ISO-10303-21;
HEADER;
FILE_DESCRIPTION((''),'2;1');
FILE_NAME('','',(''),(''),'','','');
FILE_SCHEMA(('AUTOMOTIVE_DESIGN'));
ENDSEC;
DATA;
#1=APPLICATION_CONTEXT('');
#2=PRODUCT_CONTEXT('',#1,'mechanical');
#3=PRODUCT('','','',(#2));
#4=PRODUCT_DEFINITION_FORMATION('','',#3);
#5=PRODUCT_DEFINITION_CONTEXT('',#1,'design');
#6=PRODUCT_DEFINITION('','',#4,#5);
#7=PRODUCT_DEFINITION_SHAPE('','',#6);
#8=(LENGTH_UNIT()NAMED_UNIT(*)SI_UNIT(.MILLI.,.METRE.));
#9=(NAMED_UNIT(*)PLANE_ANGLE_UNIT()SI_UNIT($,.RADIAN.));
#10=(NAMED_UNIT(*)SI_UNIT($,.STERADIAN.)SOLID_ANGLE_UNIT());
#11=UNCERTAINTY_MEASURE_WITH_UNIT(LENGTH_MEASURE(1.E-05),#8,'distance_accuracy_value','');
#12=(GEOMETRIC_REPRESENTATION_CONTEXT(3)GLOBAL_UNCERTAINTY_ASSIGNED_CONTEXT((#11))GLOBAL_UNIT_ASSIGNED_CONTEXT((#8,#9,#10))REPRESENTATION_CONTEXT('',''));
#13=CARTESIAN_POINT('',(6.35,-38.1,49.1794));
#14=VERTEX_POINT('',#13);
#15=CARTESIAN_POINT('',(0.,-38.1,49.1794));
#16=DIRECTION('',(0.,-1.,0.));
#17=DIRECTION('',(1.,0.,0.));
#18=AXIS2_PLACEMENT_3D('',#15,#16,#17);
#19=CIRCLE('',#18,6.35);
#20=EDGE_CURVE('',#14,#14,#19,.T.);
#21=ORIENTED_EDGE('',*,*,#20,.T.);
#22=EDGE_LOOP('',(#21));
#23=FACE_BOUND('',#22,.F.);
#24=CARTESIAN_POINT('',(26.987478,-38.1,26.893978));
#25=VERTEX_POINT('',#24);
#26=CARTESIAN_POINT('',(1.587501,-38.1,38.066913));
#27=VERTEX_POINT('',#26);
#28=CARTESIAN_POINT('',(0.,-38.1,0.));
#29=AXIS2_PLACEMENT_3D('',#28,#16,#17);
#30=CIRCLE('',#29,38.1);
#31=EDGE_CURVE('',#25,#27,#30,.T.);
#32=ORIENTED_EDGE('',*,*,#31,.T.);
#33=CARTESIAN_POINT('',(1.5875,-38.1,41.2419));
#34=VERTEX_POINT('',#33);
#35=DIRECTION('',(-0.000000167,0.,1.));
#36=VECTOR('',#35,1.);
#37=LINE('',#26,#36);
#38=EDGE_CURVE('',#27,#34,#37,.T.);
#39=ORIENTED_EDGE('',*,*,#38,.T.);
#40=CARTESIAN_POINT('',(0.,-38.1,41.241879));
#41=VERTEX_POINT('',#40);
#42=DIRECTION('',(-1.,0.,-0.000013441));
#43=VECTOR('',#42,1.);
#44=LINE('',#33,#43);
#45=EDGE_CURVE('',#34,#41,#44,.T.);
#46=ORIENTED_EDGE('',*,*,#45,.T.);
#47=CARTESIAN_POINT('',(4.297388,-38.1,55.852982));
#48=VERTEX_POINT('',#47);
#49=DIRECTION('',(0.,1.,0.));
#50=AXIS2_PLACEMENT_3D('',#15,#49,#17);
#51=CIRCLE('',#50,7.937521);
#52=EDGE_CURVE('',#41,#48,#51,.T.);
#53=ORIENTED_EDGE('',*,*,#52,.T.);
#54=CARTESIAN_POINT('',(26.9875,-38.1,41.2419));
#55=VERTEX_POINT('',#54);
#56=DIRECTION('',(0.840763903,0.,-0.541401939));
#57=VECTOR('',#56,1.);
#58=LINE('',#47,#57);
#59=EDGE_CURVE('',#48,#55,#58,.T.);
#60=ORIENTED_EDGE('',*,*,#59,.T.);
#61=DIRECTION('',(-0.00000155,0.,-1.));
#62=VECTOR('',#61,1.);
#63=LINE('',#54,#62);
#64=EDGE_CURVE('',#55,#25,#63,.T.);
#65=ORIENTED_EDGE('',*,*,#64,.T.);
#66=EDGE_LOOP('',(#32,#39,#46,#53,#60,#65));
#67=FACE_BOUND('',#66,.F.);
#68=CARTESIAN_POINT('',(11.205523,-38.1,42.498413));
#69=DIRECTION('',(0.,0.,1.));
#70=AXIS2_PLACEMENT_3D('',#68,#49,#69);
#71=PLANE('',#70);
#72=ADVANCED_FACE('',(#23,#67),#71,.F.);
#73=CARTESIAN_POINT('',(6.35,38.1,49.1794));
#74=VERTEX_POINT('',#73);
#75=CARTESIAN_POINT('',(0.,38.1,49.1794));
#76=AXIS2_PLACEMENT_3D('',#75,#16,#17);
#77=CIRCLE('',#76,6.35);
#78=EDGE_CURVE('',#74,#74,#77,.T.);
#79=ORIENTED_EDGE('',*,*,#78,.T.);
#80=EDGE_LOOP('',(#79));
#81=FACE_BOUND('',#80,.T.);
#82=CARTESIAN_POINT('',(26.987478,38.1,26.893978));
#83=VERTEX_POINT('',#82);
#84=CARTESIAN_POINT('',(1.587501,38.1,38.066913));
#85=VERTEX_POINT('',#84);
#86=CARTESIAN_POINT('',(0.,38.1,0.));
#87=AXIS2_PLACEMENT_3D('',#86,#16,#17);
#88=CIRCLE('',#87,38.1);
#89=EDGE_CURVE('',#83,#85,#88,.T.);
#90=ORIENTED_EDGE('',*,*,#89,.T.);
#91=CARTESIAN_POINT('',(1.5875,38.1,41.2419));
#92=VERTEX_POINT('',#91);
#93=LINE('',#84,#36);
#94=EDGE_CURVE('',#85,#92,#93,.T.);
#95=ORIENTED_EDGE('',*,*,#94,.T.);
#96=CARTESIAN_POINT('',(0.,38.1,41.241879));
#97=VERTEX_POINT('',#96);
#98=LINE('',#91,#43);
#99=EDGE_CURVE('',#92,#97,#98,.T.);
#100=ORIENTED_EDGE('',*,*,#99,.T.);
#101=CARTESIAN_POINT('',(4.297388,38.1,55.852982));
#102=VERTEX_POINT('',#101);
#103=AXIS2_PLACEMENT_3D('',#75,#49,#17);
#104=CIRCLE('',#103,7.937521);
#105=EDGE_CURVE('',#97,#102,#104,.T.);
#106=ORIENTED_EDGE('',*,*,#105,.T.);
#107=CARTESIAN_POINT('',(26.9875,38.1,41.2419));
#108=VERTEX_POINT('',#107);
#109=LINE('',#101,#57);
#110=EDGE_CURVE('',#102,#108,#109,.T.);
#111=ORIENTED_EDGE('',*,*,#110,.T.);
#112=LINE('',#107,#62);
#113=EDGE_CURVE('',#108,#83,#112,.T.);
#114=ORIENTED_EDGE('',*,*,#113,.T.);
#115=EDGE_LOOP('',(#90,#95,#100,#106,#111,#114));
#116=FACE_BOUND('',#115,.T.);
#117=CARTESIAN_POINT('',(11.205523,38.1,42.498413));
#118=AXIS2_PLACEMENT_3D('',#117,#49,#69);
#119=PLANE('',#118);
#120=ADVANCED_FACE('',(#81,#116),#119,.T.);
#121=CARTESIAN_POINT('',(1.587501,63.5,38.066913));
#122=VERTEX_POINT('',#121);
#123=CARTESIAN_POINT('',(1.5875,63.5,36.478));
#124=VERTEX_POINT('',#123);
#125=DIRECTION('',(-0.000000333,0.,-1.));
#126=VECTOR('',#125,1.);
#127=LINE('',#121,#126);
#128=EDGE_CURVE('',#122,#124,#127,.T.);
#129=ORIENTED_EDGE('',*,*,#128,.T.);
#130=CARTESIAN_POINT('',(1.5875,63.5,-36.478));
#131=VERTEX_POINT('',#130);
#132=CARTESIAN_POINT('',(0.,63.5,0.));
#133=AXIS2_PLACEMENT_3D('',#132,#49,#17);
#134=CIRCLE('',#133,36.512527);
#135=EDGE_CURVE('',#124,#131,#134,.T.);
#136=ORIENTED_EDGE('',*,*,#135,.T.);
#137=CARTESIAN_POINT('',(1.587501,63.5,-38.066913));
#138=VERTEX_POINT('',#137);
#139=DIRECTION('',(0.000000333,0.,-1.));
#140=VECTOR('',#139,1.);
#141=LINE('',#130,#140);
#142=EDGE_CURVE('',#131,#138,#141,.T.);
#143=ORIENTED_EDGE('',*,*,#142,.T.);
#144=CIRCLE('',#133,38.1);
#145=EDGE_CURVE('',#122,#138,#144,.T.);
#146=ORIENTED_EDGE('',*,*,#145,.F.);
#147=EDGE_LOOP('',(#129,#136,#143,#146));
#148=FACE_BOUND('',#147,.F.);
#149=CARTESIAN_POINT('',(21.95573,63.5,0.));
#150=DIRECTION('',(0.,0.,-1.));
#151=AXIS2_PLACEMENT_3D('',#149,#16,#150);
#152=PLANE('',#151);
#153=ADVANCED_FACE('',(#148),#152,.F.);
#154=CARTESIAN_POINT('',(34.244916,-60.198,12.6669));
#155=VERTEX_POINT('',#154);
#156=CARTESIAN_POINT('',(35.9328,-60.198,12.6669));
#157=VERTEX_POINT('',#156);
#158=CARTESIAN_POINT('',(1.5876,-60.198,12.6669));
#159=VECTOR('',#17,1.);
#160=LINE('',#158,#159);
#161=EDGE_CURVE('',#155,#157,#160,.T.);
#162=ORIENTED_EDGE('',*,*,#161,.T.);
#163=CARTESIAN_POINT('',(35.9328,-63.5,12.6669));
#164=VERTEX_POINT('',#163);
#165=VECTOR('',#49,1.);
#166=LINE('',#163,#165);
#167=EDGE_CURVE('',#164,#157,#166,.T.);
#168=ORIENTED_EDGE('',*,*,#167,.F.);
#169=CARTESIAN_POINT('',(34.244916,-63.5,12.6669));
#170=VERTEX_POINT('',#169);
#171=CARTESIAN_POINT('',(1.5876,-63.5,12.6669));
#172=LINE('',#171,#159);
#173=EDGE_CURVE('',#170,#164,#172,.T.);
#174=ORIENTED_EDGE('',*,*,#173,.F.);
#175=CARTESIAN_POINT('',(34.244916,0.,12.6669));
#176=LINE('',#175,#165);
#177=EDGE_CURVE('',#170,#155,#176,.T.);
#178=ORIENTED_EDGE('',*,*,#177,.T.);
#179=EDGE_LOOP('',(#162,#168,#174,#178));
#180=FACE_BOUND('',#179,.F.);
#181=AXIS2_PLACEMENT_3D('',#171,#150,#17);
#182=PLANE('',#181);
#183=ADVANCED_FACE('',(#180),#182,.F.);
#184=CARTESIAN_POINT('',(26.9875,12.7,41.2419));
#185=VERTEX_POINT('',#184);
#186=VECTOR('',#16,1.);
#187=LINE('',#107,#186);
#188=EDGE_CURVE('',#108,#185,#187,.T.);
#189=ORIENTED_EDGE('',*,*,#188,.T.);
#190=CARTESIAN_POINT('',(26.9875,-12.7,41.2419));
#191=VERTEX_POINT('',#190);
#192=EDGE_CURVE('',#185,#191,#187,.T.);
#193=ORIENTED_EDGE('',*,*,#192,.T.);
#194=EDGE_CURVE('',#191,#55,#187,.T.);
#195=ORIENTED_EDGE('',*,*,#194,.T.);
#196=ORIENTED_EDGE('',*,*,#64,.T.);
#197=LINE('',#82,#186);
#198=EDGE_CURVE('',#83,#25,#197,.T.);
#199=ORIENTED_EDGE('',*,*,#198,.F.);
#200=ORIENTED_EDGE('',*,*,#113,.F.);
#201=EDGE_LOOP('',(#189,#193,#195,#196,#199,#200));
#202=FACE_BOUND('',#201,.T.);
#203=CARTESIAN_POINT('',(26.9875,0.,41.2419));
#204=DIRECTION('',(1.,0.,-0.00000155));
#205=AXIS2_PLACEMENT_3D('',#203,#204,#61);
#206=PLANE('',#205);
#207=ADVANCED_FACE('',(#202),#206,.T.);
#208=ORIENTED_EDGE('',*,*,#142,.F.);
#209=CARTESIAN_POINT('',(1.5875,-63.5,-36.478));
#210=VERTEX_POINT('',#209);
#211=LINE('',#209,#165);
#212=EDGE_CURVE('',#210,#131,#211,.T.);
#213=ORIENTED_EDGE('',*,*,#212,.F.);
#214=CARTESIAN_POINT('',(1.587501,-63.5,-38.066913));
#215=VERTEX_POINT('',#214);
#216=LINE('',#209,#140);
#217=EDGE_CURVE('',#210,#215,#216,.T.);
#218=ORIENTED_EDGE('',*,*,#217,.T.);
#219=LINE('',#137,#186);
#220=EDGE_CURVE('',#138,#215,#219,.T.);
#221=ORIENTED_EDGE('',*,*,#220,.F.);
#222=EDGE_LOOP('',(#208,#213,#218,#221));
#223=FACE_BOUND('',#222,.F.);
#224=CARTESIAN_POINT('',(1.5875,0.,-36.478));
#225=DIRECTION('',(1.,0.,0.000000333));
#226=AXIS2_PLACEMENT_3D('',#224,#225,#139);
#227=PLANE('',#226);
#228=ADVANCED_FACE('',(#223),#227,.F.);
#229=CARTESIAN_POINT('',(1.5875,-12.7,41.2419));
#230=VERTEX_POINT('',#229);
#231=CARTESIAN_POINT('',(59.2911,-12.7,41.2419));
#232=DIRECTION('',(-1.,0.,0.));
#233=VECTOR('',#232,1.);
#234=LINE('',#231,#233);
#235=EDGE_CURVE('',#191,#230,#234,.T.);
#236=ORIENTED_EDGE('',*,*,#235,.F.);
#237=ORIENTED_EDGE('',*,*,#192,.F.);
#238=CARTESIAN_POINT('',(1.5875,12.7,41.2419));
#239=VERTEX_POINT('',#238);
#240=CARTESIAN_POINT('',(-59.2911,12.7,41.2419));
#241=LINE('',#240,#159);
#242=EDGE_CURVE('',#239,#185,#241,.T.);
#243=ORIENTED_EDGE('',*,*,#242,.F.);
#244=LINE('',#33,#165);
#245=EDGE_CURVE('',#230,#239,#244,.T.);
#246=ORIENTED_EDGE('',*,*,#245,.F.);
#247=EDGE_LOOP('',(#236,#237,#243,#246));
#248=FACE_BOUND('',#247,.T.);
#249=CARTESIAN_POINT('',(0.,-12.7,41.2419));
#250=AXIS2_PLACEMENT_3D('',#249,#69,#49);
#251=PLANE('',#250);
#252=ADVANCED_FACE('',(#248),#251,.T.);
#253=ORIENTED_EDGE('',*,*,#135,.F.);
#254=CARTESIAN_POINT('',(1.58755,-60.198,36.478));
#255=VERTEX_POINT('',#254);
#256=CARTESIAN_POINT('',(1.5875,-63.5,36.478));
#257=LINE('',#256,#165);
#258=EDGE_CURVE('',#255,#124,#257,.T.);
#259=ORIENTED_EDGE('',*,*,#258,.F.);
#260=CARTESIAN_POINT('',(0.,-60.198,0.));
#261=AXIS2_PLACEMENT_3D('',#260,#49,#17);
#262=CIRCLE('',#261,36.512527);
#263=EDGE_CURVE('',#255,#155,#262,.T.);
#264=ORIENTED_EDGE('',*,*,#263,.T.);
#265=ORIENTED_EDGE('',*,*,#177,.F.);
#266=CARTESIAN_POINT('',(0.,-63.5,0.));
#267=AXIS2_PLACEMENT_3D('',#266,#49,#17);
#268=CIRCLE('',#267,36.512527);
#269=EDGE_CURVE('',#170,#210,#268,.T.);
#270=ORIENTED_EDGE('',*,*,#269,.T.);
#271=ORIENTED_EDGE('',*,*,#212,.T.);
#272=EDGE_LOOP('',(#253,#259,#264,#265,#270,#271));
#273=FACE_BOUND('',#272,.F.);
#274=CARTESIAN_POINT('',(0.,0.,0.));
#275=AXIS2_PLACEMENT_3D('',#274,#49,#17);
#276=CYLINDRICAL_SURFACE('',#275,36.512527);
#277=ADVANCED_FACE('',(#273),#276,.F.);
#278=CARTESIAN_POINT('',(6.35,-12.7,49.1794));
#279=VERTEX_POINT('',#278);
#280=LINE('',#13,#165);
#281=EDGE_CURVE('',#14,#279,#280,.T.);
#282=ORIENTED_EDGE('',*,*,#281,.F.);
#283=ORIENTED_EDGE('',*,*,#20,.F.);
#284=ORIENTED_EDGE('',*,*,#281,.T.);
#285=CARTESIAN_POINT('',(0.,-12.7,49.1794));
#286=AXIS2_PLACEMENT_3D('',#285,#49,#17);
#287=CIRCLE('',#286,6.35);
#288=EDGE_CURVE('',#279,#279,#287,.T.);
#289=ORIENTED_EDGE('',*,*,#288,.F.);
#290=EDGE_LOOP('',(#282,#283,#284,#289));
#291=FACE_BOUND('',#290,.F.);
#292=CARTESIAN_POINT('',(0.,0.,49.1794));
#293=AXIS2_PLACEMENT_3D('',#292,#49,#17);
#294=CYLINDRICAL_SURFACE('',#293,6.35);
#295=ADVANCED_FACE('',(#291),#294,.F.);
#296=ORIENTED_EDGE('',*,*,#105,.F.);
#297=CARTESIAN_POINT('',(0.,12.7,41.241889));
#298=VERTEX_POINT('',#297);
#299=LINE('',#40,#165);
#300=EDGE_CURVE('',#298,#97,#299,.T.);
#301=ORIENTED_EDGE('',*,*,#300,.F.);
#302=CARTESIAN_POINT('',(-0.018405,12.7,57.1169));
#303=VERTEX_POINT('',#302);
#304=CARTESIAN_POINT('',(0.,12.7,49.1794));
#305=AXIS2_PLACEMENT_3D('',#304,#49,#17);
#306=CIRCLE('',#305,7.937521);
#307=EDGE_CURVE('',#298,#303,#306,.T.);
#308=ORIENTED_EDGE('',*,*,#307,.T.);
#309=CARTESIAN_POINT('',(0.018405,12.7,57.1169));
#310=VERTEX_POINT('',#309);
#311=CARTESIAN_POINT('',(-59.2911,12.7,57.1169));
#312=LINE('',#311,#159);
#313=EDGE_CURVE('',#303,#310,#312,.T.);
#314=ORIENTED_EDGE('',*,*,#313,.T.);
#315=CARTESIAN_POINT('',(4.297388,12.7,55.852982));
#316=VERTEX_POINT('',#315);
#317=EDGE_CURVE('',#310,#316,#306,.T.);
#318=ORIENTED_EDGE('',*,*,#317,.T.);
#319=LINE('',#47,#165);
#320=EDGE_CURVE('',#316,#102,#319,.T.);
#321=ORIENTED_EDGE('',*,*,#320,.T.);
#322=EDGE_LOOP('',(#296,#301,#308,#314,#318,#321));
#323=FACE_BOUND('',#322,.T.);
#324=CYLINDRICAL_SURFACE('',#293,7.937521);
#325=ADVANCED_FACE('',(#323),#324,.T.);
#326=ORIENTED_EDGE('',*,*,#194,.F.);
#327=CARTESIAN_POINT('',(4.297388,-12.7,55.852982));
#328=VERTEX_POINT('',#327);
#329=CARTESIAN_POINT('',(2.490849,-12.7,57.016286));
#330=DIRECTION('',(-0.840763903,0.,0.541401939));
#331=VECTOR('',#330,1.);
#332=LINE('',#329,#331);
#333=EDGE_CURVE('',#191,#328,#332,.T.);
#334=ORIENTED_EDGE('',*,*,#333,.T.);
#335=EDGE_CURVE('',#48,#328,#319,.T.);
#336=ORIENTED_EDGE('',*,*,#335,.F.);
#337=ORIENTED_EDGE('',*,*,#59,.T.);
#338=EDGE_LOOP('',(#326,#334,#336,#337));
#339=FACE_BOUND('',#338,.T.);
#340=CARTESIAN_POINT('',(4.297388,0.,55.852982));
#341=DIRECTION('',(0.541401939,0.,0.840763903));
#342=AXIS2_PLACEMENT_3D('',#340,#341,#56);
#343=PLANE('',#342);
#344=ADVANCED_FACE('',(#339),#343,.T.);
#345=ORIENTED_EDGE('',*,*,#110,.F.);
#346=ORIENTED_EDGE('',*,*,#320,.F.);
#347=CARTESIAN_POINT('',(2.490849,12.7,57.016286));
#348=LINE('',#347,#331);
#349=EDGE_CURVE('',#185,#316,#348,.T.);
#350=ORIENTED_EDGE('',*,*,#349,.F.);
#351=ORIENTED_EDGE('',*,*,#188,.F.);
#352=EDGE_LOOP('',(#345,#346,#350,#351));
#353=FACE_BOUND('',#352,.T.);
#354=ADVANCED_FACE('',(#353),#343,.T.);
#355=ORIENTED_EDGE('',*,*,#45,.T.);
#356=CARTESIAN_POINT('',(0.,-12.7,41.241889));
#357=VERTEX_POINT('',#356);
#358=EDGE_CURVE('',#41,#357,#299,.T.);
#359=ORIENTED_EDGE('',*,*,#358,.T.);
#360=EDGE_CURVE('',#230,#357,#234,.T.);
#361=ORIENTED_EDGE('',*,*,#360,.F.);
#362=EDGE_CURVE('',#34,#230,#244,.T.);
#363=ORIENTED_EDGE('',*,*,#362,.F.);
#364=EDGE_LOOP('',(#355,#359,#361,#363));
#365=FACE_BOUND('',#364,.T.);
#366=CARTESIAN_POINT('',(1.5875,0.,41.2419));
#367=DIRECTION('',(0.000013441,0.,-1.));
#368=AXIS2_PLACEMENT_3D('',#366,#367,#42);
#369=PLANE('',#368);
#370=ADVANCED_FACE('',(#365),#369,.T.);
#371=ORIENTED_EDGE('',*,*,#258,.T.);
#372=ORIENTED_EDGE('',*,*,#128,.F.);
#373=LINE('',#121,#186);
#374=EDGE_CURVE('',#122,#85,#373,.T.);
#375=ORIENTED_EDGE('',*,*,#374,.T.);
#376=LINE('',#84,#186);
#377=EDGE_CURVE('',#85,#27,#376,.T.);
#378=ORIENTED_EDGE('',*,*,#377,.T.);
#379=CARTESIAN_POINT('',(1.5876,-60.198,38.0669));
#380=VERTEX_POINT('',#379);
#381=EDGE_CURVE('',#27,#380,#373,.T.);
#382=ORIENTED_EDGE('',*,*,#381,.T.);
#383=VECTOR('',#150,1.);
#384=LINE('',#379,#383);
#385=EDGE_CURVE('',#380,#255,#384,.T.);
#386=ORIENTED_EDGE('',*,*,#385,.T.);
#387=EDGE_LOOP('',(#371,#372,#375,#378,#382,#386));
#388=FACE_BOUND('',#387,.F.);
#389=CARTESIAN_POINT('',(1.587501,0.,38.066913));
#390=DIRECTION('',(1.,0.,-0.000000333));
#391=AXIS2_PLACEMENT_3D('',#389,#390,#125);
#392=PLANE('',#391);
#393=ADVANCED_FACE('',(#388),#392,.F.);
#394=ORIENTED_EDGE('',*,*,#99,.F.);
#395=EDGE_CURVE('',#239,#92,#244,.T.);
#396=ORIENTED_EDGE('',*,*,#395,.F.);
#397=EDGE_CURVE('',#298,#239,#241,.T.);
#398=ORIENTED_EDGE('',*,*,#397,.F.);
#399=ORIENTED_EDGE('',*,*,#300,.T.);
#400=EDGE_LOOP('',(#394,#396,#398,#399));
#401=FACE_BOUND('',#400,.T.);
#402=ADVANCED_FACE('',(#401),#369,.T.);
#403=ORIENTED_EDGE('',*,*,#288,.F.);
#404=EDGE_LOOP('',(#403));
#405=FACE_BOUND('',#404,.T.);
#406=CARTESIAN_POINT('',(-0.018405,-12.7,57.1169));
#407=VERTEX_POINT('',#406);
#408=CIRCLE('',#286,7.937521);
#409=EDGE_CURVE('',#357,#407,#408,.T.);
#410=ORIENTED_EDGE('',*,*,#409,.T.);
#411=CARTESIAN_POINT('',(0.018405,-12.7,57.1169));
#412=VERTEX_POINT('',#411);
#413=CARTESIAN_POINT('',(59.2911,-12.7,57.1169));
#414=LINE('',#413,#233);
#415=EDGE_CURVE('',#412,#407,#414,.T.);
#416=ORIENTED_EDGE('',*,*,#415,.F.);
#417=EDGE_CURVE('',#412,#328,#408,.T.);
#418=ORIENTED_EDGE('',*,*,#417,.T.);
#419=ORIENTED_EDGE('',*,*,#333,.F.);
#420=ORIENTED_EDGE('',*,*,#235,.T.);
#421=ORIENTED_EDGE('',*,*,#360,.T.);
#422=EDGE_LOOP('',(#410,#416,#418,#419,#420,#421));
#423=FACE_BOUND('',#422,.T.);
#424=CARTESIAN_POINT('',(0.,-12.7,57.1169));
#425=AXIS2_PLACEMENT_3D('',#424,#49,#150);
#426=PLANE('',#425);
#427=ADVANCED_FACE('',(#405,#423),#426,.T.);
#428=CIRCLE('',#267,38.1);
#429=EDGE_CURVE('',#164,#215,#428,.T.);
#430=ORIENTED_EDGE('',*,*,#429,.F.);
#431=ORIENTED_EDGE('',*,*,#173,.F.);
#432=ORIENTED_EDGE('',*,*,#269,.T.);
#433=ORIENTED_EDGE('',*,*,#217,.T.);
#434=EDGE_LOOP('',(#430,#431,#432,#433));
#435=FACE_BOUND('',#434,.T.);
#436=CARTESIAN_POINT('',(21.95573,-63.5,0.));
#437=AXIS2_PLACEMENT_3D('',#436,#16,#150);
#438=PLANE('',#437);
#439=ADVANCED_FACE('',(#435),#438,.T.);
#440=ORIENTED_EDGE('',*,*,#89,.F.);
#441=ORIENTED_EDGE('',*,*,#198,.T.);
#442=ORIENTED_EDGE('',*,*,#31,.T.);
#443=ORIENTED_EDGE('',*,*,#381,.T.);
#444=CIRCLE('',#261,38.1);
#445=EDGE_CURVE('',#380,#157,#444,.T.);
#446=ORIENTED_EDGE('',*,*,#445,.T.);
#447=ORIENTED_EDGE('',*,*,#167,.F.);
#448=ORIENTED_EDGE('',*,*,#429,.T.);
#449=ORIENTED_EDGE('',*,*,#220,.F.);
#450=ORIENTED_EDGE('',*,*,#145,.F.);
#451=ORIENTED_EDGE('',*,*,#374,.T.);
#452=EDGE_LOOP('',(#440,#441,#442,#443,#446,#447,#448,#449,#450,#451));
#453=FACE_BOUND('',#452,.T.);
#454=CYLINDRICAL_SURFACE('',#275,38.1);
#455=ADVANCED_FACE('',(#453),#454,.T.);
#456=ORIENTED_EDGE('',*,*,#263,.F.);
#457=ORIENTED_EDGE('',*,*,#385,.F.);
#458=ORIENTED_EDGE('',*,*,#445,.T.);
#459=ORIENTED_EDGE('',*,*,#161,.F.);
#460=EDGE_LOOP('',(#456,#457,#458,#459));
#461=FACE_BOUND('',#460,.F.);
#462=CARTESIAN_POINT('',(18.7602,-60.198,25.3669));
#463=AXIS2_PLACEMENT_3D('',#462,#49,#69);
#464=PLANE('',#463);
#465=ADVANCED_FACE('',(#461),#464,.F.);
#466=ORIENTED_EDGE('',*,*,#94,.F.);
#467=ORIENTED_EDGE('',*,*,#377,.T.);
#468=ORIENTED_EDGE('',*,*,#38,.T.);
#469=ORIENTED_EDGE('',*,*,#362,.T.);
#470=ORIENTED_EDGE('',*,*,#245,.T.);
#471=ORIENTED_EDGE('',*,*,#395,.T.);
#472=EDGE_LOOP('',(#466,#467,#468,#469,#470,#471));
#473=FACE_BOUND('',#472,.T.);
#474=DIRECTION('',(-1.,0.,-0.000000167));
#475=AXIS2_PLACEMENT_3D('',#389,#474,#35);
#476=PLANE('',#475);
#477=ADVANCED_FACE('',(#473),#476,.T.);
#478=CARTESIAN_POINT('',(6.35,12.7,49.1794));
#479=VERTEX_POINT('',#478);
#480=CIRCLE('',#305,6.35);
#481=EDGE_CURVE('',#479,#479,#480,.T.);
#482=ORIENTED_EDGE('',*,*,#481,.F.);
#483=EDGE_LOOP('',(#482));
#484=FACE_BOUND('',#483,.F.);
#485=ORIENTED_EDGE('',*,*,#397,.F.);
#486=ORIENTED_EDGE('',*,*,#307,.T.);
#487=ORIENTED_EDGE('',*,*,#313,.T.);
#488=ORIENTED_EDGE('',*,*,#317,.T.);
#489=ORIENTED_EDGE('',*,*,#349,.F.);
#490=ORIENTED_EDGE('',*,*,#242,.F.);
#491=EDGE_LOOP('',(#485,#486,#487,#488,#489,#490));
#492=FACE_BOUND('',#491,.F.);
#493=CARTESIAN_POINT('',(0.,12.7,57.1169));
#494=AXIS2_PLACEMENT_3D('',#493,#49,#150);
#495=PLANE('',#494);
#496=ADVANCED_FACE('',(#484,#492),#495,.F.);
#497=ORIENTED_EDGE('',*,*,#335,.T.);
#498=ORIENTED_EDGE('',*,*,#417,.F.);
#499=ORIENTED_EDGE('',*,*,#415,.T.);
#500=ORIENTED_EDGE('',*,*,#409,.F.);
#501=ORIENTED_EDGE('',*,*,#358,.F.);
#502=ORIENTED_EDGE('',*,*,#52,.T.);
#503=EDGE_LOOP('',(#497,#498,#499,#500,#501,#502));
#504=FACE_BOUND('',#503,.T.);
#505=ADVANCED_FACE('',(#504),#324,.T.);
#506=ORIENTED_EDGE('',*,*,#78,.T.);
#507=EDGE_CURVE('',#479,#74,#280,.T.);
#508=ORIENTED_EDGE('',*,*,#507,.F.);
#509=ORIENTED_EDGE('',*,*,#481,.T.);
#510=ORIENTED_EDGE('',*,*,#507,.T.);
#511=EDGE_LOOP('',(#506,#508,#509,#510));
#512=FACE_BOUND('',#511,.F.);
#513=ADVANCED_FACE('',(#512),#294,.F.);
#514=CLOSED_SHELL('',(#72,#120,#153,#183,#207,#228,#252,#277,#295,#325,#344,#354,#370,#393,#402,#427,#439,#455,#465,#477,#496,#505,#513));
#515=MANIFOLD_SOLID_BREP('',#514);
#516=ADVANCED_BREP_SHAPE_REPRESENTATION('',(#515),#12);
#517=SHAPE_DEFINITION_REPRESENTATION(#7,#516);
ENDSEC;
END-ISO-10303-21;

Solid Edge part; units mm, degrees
sketch "Sketch1" plane through (0, 0, 0) normal (0, -1, 0) x (1, 0, 0)
  line L0 (1.5875, -36.478) -> (1.5875, -38.0669)
  arc A0 (1.5875, 38.0669) -> (1.5875, -38.0669) centre (0, 0) cw
  line L1 (1.5875, 38.0669) -> (1.5875, 36.478)
  arc A1 (1.5875, 36.478) -> (1.5875, -36.478) centre (0, 0) cw
  dimension "D1" = 76.2
extrude "Protrusion1" add sketch "Sketch1" along normal mid plane 127
sketch "Sketch2" plane through (0, 0, 0) normal (0, -1, 0) x (1, 0, 0)
  circle A0 centre (0, 49.1794) radius 6.35
  line L0 (1.5875, 38.0669) -> (1.5875, 41.2419)
  line L1 (1.5875, 41.2419) -> (0, 41.2419)
  line L2 (4.2974, 55.853) -> (26.9875, 41.2419)
  line L3 (26.9875, 41.2419) -> (26.9875, 26.894)
  arc A1 (26.9875, 26.894) -> (1.5875, 38.0669) centre (0, 0) ccw
  arc A2 (0, 41.2419) -> (4.2974, 55.853) centre (0, 49.1794) cw
  dimension "D1" = 3.175
  dimension "D2" = 12.7
  dimension "D3" = 1.5875
  dimension "D4" = 7.9375
extrude "ExtrudedProtrusion_2" add sketch "Sketch2" along normal mid plane 76.2
sketch "Sketch3" plane through (0, 0, 0) normal (1, 0, 0) x (0, 1, 0)
  line L0 (-12.7, 41.2419) -> (12.7, 41.2419)
  line L1 (12.7, 57.1169) -> (12.7, 41.2419)
  line L2 (-12.7, 57.1169) -> (12.7, 57.1169)
  line L3 (-12.7, 57.1169) -> (-12.7, 41.2419)
extrude "ExtrudedCutout_1" cut sketch "Sketch3" along normal mid plane 118.5822
sketch "Sketch4" plane through (19.8438, -63.5, 0) normal (0, -1, 0) x (0, 0, -1)
  line L0 (-38.0669, -18.2562) -> (-38.0669, 16.089)
  line L1 (-12.6669, 16.089) -> (-38.0669, 16.089)
  line L2 (-12.6669, -18.2562) -> (-12.6669, 16.089)
  line L3 (-38.0669, -18.2562) -> (-12.6669, -18.2562)
  dimension "D1" = 25.4
extrude "ExtrudedCutout_2" cut sketch "Sketch4" against normal blind 3.302
